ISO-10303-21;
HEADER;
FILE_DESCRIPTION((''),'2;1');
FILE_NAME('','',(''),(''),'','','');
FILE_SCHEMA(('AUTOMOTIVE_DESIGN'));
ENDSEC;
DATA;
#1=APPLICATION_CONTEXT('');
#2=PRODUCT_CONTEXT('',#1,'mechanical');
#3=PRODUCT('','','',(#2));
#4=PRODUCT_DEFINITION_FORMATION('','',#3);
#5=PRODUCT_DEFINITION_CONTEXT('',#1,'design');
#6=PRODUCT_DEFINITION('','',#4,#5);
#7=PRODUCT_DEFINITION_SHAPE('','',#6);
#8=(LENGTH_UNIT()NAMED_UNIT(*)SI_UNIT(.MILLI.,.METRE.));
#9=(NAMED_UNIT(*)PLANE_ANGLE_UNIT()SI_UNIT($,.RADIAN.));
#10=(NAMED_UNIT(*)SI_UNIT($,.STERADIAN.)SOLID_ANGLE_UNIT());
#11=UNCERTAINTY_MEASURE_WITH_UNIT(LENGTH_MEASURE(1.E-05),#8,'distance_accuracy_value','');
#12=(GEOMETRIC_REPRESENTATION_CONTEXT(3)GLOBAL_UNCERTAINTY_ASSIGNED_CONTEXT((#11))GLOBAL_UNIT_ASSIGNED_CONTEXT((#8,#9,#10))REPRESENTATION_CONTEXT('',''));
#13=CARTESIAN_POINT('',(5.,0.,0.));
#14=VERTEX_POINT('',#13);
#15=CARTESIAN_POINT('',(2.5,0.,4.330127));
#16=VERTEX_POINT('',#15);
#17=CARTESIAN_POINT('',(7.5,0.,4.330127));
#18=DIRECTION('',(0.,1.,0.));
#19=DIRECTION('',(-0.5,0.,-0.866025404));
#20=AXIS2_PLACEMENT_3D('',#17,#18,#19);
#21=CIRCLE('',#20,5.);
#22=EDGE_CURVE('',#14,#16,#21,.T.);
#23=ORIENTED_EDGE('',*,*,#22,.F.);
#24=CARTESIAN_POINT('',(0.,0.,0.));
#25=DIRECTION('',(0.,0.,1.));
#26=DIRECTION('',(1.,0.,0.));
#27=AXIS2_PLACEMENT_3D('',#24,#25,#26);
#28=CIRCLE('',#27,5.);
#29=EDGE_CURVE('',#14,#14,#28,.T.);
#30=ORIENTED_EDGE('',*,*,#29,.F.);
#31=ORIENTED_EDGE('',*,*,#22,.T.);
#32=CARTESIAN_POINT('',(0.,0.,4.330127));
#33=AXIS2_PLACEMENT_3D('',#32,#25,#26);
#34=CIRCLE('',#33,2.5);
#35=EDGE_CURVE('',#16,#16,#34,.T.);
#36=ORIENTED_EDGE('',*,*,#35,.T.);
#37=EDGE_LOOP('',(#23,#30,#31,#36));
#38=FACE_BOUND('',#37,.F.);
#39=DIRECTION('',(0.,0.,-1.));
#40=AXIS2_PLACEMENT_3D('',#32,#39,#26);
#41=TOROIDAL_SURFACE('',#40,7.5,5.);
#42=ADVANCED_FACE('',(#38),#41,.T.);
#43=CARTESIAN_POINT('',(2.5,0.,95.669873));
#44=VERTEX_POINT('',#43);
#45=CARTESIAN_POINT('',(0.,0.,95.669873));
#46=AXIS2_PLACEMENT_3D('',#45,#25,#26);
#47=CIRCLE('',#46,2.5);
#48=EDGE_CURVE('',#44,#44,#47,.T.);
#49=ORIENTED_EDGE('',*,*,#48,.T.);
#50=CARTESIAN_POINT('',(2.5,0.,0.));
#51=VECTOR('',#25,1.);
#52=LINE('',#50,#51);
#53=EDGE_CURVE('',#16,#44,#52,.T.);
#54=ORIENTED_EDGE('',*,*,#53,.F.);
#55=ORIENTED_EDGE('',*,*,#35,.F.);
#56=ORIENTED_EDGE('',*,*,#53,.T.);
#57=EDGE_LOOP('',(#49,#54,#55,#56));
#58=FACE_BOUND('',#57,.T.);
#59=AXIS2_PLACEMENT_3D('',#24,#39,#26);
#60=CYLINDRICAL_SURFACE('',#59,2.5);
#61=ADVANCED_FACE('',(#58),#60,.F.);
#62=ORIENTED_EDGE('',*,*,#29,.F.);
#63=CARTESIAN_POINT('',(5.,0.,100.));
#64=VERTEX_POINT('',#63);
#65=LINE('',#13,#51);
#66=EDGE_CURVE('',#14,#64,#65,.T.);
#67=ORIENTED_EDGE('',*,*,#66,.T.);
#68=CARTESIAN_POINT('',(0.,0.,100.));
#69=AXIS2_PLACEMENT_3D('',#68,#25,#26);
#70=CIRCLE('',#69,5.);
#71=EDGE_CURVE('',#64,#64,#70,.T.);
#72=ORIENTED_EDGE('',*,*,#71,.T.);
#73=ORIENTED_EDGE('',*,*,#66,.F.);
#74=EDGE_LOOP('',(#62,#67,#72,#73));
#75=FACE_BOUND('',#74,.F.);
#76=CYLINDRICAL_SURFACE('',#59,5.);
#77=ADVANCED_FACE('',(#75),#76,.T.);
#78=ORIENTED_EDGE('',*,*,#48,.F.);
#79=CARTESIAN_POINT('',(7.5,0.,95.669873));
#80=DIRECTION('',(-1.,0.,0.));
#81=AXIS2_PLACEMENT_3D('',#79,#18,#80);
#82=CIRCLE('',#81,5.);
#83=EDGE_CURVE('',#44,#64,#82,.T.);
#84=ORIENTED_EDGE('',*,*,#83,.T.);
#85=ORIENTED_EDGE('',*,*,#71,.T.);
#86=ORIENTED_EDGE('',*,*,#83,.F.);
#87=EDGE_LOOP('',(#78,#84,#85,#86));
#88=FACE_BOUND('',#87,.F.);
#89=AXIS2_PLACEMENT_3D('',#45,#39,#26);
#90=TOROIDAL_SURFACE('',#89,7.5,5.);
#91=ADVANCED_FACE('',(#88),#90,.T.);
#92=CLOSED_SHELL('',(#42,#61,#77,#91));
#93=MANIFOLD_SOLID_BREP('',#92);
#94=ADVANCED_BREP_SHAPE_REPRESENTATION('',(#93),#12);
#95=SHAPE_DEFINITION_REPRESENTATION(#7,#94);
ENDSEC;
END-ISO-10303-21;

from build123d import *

# Parameters (mm, degrees)
F0_R     = 5
F0_R_2   = 2.5
F1_DEPTH = 100


# Not quite as in the source:
# - a fillet or chamfer that OpenCascade refuses, or shapes differently, is made with other operations: its cross-section is extruded or revolved along the edge and cut away or added


with BuildPart() as f1:
    # F0 (on Top) → F1 (new body)
    with BuildSketch(Plane.XY):
        Circle(F0_R)
        Circle(F0_R_2, mode=Mode.SUBTRACT)
    extrude(amount=F1_DEPTH)

    # F2: fillet of radius 5 on 1 edges, made by hand

    # F2_s1 → F2_t2 (revolve, cut)
    with BuildSketch(Plane.XZ):
        with BuildLine():
            ThreePointArc((2.5, 95.6698729811), (3.1698729811, 98.1698729811), (5, 100))
            Line((5, 100), (2.5, 100))
            Line((2.5, 100), (2.5, 95.6698729811))
        make_face()
    revolve(axis=Axis((0, 0, 100), (0, 0, 1)), mode=Mode.SUBTRACT)

    # F3: fillet of radius 5 on 1 edges, made by hand

    # F3_s1 → F3_t2 (revolve, cut)
    with BuildSketch(Plane.XZ):
        with BuildLine():
            ThreePointArc((5, 0), (3.1698729811, 1.8301270189), (2.5, 4.3301270189))
            Line((2.5, 4.3301270189), (2.5, 0))
            Line((2.5, 0), (5, 0))
        make_face()
    revolve(axis=Axis((0, 0, 0), (0, 0, 1)), mode=Mode.SUBTRACT)


solid = f1.part
